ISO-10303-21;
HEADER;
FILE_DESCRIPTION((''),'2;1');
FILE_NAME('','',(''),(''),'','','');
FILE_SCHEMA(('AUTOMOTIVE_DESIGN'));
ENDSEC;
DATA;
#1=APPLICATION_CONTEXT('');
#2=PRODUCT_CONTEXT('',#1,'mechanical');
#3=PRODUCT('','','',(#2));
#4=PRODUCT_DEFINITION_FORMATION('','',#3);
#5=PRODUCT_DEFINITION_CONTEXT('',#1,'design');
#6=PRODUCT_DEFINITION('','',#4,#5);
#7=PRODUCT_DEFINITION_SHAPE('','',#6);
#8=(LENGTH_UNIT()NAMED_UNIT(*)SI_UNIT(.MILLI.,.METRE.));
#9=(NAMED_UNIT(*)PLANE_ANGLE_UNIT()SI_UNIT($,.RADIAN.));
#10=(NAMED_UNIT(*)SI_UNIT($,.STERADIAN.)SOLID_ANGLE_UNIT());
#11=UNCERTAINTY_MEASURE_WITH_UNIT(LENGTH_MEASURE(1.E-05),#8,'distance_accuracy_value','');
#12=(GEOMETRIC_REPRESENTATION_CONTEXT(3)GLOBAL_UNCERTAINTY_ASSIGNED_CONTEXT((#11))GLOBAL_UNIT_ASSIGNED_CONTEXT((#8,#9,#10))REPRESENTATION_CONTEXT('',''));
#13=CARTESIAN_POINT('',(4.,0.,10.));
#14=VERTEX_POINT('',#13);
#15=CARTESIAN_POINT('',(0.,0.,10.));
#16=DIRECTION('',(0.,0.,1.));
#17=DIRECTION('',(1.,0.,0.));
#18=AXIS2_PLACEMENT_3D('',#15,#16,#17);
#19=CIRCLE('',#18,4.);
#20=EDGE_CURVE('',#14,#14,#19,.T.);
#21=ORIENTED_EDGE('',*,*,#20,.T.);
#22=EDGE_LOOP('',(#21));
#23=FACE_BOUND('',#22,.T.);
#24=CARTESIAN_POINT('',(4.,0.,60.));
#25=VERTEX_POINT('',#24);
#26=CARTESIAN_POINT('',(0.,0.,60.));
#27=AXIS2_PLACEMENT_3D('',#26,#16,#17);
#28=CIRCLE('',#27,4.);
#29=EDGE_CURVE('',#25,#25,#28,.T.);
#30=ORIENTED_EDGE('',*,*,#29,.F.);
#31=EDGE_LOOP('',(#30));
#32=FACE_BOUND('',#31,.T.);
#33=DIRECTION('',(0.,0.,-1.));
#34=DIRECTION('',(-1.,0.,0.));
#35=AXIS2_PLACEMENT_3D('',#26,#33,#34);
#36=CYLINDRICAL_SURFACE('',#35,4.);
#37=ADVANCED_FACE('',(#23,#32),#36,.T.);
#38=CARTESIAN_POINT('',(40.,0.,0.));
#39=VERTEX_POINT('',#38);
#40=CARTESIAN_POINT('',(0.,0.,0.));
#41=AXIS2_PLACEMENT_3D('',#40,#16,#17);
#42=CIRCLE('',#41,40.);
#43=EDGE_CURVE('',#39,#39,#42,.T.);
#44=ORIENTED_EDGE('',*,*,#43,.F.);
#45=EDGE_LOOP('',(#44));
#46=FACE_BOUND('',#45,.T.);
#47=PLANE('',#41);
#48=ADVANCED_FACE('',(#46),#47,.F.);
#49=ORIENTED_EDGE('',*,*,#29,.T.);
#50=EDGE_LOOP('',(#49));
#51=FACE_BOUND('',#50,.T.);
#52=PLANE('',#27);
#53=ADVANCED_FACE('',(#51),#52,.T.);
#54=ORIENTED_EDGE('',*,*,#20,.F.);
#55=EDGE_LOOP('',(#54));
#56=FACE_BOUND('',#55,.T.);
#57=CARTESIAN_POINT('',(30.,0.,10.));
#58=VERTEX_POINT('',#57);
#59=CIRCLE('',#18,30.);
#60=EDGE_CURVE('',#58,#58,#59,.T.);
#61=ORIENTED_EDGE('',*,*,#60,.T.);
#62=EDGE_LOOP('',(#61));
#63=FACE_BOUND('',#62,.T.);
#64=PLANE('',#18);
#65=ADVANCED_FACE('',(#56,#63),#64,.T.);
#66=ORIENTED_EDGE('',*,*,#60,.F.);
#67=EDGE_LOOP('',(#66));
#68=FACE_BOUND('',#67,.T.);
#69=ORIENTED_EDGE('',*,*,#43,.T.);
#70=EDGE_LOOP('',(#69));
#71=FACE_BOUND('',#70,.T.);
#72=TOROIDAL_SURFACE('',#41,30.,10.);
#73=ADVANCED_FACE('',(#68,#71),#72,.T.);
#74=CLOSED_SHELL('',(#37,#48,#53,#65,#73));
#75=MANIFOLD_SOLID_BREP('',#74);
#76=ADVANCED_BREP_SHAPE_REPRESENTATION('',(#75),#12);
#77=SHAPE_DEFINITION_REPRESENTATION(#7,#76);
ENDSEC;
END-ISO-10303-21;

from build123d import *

# Parameters (mm, degrees)
ESQUISSE1_R        = 40
BOSS_EXTRU_1_DEPTH = 10
CONG_1_R           = 10
ESQUISSE2_R        = 4
BOSS_EXTRU_2_DEPTH = 50


with BuildPart() as part:
    # Esquisse1 → Boss.-Extru.1 (new body)
    with BuildSketch(Plane.XY):
        Circle(ESQUISSE1_R)
    extrude(amount=BOSS_EXTRU_1_DEPTH)

    # Congé1
    cong_1_edges = [part.edges().sort_by_distance(p)[0] for p in [
        (-40, 0, 10),
    ]]
    fillet(cong_1_edges, radius=CONG_1_R - 0.0001)  # a hair under: the kernel refuses the full size

    # Esquisse2 → Boss.-Extru.2 (add)
    with BuildSketch(Plane.XY.offset(10)):
        Circle(ESQUISSE2_R)
    extrude(amount=BOSS_EXTRU_2_DEPTH)


solid = part.part
